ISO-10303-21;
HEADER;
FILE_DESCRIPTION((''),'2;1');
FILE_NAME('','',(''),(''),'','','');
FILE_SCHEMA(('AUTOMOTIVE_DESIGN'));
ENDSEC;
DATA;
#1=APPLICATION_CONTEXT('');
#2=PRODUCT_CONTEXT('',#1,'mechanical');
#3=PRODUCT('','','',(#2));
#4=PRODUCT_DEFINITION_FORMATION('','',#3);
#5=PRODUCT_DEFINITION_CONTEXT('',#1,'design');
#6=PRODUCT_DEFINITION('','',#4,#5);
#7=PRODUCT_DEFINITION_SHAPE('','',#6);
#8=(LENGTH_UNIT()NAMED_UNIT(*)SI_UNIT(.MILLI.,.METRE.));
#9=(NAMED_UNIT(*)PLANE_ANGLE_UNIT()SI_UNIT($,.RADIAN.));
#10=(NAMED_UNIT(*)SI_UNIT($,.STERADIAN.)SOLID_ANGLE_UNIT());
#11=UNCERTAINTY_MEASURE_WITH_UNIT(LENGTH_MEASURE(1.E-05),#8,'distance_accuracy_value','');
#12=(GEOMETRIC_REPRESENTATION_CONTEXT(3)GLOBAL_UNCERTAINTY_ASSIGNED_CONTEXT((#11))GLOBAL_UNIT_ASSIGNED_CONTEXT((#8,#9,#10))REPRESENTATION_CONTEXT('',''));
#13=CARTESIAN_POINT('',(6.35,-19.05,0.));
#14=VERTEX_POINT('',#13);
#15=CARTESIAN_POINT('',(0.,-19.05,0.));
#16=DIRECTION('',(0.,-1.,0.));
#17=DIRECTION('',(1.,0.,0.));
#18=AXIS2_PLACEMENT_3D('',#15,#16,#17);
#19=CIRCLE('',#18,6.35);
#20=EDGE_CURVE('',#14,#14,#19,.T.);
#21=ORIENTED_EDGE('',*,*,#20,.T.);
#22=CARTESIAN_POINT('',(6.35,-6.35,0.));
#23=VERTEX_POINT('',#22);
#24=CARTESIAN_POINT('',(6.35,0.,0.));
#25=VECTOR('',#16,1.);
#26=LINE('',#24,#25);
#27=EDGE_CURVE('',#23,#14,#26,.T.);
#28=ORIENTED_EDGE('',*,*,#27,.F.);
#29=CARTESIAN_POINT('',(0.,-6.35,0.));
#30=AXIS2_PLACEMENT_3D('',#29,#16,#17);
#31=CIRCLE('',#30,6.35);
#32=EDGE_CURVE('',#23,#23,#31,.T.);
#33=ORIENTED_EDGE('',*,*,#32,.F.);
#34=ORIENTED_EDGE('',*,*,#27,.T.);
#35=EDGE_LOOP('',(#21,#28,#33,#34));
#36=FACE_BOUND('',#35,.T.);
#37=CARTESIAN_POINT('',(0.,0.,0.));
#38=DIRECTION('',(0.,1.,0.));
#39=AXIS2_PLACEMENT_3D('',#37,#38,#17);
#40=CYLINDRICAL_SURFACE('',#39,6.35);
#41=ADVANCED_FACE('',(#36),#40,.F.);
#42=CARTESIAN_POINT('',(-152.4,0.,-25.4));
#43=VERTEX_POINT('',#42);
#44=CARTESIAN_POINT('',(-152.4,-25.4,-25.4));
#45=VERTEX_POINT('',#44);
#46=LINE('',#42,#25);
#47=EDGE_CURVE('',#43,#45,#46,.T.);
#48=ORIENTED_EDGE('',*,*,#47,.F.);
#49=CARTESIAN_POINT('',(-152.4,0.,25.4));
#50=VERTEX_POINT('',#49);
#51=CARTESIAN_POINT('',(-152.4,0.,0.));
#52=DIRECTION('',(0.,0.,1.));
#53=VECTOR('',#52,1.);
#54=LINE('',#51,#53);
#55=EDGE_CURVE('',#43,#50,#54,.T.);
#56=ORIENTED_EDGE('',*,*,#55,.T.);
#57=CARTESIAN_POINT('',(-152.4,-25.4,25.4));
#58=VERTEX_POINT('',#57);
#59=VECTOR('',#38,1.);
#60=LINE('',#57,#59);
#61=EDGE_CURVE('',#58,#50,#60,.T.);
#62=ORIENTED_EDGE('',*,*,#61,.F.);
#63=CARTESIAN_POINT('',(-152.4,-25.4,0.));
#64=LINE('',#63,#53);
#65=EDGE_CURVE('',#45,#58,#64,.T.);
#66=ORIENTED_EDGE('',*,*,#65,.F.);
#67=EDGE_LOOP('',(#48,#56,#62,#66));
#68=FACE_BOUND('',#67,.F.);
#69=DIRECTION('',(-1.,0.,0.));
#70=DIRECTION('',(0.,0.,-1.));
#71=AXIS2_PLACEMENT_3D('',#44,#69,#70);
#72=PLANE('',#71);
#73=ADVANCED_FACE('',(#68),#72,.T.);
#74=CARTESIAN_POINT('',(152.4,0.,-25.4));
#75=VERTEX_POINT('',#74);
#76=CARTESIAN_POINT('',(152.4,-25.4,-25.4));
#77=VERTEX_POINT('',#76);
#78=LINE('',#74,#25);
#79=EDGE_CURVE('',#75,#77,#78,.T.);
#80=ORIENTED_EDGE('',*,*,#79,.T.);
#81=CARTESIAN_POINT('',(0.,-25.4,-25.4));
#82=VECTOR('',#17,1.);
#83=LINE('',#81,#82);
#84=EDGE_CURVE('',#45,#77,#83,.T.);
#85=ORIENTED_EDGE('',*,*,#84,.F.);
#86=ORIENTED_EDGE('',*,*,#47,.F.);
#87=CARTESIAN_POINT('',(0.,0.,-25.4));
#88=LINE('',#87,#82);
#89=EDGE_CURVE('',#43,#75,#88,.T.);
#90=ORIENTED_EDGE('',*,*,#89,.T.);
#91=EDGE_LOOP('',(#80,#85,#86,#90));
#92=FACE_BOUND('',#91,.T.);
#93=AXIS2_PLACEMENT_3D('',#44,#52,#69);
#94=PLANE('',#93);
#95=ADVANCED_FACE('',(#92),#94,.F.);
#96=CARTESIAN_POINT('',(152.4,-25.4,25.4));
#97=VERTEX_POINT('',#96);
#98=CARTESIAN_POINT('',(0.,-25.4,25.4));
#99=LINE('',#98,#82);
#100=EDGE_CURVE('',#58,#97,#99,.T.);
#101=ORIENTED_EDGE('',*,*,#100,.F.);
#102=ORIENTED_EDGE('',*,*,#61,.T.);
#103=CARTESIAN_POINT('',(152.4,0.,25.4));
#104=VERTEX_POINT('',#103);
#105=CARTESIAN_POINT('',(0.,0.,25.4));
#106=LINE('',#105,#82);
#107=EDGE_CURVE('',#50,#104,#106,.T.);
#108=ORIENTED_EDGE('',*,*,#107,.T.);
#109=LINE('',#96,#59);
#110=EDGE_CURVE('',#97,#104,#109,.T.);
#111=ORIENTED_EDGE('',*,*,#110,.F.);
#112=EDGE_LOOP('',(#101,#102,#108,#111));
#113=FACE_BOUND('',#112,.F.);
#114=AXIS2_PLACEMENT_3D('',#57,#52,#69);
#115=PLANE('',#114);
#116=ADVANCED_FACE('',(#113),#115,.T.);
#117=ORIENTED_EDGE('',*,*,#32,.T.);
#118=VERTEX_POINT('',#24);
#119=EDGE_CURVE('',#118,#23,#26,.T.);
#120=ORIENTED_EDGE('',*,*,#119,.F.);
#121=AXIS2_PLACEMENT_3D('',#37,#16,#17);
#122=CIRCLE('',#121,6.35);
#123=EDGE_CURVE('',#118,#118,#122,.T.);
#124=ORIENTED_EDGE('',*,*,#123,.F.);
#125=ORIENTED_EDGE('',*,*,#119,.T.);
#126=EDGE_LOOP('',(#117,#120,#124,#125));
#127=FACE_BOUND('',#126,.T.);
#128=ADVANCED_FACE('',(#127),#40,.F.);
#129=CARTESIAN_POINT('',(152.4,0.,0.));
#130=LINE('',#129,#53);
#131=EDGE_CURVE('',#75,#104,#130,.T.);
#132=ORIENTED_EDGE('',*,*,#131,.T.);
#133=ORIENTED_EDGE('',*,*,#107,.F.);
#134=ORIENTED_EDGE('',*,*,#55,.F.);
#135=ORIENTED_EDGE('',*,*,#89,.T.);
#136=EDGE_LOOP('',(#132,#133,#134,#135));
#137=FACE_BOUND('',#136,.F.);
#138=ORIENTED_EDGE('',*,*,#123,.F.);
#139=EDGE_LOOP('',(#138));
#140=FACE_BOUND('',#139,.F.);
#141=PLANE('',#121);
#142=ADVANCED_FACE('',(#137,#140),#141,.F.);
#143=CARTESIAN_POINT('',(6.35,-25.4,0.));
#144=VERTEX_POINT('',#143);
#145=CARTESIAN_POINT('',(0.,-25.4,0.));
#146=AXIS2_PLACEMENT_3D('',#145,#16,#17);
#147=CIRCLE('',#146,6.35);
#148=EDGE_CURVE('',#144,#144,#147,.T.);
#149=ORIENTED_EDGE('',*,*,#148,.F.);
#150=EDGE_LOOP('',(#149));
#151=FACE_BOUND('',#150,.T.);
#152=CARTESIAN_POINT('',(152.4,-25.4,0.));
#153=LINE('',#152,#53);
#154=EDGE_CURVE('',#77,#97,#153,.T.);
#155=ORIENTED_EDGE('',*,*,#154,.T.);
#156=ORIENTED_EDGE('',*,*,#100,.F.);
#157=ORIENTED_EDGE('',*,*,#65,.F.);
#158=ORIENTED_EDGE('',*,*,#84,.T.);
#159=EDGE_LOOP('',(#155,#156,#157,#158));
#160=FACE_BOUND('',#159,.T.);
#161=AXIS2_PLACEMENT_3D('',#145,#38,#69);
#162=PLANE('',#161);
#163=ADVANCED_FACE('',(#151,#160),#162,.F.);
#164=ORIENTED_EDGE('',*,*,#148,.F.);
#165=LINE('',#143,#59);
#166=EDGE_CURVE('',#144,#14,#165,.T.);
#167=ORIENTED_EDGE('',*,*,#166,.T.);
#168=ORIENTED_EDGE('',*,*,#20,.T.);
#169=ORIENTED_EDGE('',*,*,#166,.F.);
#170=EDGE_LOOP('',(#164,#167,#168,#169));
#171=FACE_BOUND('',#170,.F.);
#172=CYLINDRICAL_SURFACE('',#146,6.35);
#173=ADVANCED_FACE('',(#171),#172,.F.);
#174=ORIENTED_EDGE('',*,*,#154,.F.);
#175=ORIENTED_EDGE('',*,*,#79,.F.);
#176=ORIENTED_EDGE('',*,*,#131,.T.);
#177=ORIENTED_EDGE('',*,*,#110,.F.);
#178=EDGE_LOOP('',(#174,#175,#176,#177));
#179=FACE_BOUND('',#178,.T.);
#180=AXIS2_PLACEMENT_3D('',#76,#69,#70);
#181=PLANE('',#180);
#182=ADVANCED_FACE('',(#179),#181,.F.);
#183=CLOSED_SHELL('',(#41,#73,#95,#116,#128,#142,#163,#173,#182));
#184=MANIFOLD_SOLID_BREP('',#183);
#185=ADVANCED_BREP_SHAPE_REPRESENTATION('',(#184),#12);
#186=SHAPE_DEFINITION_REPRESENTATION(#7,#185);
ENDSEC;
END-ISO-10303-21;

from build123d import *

# Parameters (mm, degrees)
F0_W     = 304.8
F0_H     = 50.8
F0_R     = 6.35
F1_DEPTH = 19.05


# Not quite as in the source:
# - a pattern or mirror of a feature is missing from the dataset's text; its kind, count and spacing are read off the source's solid


with BuildPart() as f1:
    # F0 (on Front) → F1 (new body)
    with BuildSketch(Plane.XZ):
        Rectangle(F0_W, F0_H)
        Circle(F0_R, mode=Mode.SUBTRACT)
    extrude(amount=F1_DEPTH)

    # F1_copies: F1 across plane


with BuildPart() as f1_1:
    add(f1.part)
    add(f1.part.mirror(Plane(origin=(0, -12.7, 0), x_dir=(0, 0, -1), z_dir=(0, -1, 0))))


solid = f1_1.part
